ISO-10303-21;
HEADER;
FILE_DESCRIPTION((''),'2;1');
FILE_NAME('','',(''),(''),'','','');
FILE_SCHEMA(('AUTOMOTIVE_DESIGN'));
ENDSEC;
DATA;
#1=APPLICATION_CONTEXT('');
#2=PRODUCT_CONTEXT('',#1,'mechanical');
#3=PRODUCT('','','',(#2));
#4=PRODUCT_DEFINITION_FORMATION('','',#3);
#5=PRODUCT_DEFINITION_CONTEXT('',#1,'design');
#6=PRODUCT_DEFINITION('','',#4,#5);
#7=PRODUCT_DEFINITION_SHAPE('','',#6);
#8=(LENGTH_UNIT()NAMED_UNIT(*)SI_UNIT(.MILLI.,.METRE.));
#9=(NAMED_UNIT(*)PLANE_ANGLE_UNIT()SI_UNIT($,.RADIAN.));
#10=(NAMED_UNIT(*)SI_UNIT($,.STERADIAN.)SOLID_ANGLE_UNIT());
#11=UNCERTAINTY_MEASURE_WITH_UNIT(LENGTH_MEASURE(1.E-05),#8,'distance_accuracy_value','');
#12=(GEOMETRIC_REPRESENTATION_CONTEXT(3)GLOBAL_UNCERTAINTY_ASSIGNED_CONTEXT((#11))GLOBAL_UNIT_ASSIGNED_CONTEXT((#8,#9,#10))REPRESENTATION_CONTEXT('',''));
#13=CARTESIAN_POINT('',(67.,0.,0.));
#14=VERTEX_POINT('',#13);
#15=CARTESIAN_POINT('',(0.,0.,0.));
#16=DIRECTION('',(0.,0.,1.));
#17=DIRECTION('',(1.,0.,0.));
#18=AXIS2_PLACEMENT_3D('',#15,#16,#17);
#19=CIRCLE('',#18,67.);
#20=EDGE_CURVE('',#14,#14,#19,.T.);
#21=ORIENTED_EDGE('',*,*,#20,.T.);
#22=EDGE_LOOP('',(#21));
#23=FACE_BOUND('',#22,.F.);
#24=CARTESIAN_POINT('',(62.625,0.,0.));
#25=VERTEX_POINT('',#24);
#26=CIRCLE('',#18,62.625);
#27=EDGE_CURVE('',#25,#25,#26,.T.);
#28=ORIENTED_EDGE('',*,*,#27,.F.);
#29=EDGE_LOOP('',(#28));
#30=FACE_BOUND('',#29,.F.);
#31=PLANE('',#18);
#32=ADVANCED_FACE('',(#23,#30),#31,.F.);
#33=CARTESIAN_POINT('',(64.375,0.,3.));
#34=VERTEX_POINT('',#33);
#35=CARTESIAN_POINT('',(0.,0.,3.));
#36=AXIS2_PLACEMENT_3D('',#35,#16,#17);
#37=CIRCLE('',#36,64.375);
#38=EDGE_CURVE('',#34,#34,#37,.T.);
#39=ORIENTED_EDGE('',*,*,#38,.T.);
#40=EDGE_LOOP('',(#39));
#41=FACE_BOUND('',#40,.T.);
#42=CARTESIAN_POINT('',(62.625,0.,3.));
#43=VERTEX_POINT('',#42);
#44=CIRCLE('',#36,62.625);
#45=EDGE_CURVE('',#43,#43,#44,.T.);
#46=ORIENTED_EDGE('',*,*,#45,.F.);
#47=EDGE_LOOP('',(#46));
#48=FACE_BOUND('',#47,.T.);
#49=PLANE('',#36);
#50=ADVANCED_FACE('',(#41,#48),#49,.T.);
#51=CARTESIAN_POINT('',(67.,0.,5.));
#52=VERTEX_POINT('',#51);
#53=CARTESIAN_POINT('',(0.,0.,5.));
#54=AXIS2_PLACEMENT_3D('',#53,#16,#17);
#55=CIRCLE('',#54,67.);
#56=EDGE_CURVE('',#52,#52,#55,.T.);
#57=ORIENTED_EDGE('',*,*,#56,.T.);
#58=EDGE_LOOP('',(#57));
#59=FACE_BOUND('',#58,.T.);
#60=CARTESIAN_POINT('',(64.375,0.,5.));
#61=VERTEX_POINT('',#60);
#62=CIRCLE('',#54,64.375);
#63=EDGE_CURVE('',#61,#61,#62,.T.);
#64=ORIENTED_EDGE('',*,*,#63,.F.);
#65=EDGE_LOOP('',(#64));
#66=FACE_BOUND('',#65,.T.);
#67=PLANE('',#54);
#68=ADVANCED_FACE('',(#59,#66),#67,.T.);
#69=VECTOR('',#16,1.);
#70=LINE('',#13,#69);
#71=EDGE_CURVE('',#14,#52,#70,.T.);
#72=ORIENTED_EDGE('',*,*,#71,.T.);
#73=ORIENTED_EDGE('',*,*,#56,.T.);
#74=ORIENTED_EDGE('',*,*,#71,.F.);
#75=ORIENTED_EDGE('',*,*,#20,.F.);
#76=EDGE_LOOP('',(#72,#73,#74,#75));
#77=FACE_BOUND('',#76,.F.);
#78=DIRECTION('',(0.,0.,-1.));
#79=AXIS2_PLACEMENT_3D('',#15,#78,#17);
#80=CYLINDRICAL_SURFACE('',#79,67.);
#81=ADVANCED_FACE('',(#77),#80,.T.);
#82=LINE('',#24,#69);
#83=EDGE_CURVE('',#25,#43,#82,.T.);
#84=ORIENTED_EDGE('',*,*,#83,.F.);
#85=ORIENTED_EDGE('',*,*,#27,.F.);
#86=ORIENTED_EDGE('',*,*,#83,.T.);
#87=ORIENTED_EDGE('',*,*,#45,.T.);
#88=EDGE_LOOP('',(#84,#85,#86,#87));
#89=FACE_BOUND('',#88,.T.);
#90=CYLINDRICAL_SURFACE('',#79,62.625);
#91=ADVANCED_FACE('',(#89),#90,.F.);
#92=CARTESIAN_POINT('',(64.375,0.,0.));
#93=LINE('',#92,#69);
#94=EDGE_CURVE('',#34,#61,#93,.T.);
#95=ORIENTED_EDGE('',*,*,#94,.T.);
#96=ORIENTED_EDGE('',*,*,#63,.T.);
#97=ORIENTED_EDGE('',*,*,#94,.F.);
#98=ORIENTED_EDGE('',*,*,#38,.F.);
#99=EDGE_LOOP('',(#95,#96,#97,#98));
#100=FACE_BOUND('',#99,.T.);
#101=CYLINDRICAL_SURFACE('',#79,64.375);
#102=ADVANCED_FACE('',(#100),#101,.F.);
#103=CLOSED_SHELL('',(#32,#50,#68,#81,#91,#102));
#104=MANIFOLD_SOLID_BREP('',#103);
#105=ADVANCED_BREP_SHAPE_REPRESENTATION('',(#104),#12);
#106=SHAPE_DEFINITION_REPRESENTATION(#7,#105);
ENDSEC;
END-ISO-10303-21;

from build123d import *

# Parameters (mm, degrees)
F0_R     = 67
F0_R_2   = 64.375
F1_DEPTH = 5
F0_R_3   = 62.625
F2_DEPTH = 3
F0_R_4   = 58.875
F3_DEPTH = 2
F4_R     = 5.75
F5_DEPTH = 192


# Not quite as in the source:
# - an extrude ends at something that could not be found from the text; its depth is read off the source's solid


with BuildPart() as f1:
    # F0 (on Top) → F1 (new body)
    with BuildSketch(Plane.XY):
        Circle(F0_R)
        Circle(F0_R_2, mode=Mode.SUBTRACT)
    extrude(amount=F1_DEPTH)

    # F0 (on Top) → F2 (join)
    with BuildSketch(Plane.XY):
        Circle(F0_R_2)
        Circle(F0_R_3, mode=Mode.SUBTRACT)
    extrude(amount=F2_DEPTH)

    # F0 (on Top) → F3 (cut)
    with BuildSketch(Plane.XY):
        Circle(F0_R_3)
        Circle(F0_R_4, mode=Mode.SUBTRACT)
    extrude(amount=F3_DEPTH, mode=Mode.SUBTRACT)

    # F4 (on Top) → F5 (cut, through all)
    with BuildSketch(Plane.XY):
        with Locations((0, 46.25)):
            Circle(F4_R)
    extrude(amount=-F5_DEPTH, mode=Mode.SUBTRACT)


solid = f1.part
